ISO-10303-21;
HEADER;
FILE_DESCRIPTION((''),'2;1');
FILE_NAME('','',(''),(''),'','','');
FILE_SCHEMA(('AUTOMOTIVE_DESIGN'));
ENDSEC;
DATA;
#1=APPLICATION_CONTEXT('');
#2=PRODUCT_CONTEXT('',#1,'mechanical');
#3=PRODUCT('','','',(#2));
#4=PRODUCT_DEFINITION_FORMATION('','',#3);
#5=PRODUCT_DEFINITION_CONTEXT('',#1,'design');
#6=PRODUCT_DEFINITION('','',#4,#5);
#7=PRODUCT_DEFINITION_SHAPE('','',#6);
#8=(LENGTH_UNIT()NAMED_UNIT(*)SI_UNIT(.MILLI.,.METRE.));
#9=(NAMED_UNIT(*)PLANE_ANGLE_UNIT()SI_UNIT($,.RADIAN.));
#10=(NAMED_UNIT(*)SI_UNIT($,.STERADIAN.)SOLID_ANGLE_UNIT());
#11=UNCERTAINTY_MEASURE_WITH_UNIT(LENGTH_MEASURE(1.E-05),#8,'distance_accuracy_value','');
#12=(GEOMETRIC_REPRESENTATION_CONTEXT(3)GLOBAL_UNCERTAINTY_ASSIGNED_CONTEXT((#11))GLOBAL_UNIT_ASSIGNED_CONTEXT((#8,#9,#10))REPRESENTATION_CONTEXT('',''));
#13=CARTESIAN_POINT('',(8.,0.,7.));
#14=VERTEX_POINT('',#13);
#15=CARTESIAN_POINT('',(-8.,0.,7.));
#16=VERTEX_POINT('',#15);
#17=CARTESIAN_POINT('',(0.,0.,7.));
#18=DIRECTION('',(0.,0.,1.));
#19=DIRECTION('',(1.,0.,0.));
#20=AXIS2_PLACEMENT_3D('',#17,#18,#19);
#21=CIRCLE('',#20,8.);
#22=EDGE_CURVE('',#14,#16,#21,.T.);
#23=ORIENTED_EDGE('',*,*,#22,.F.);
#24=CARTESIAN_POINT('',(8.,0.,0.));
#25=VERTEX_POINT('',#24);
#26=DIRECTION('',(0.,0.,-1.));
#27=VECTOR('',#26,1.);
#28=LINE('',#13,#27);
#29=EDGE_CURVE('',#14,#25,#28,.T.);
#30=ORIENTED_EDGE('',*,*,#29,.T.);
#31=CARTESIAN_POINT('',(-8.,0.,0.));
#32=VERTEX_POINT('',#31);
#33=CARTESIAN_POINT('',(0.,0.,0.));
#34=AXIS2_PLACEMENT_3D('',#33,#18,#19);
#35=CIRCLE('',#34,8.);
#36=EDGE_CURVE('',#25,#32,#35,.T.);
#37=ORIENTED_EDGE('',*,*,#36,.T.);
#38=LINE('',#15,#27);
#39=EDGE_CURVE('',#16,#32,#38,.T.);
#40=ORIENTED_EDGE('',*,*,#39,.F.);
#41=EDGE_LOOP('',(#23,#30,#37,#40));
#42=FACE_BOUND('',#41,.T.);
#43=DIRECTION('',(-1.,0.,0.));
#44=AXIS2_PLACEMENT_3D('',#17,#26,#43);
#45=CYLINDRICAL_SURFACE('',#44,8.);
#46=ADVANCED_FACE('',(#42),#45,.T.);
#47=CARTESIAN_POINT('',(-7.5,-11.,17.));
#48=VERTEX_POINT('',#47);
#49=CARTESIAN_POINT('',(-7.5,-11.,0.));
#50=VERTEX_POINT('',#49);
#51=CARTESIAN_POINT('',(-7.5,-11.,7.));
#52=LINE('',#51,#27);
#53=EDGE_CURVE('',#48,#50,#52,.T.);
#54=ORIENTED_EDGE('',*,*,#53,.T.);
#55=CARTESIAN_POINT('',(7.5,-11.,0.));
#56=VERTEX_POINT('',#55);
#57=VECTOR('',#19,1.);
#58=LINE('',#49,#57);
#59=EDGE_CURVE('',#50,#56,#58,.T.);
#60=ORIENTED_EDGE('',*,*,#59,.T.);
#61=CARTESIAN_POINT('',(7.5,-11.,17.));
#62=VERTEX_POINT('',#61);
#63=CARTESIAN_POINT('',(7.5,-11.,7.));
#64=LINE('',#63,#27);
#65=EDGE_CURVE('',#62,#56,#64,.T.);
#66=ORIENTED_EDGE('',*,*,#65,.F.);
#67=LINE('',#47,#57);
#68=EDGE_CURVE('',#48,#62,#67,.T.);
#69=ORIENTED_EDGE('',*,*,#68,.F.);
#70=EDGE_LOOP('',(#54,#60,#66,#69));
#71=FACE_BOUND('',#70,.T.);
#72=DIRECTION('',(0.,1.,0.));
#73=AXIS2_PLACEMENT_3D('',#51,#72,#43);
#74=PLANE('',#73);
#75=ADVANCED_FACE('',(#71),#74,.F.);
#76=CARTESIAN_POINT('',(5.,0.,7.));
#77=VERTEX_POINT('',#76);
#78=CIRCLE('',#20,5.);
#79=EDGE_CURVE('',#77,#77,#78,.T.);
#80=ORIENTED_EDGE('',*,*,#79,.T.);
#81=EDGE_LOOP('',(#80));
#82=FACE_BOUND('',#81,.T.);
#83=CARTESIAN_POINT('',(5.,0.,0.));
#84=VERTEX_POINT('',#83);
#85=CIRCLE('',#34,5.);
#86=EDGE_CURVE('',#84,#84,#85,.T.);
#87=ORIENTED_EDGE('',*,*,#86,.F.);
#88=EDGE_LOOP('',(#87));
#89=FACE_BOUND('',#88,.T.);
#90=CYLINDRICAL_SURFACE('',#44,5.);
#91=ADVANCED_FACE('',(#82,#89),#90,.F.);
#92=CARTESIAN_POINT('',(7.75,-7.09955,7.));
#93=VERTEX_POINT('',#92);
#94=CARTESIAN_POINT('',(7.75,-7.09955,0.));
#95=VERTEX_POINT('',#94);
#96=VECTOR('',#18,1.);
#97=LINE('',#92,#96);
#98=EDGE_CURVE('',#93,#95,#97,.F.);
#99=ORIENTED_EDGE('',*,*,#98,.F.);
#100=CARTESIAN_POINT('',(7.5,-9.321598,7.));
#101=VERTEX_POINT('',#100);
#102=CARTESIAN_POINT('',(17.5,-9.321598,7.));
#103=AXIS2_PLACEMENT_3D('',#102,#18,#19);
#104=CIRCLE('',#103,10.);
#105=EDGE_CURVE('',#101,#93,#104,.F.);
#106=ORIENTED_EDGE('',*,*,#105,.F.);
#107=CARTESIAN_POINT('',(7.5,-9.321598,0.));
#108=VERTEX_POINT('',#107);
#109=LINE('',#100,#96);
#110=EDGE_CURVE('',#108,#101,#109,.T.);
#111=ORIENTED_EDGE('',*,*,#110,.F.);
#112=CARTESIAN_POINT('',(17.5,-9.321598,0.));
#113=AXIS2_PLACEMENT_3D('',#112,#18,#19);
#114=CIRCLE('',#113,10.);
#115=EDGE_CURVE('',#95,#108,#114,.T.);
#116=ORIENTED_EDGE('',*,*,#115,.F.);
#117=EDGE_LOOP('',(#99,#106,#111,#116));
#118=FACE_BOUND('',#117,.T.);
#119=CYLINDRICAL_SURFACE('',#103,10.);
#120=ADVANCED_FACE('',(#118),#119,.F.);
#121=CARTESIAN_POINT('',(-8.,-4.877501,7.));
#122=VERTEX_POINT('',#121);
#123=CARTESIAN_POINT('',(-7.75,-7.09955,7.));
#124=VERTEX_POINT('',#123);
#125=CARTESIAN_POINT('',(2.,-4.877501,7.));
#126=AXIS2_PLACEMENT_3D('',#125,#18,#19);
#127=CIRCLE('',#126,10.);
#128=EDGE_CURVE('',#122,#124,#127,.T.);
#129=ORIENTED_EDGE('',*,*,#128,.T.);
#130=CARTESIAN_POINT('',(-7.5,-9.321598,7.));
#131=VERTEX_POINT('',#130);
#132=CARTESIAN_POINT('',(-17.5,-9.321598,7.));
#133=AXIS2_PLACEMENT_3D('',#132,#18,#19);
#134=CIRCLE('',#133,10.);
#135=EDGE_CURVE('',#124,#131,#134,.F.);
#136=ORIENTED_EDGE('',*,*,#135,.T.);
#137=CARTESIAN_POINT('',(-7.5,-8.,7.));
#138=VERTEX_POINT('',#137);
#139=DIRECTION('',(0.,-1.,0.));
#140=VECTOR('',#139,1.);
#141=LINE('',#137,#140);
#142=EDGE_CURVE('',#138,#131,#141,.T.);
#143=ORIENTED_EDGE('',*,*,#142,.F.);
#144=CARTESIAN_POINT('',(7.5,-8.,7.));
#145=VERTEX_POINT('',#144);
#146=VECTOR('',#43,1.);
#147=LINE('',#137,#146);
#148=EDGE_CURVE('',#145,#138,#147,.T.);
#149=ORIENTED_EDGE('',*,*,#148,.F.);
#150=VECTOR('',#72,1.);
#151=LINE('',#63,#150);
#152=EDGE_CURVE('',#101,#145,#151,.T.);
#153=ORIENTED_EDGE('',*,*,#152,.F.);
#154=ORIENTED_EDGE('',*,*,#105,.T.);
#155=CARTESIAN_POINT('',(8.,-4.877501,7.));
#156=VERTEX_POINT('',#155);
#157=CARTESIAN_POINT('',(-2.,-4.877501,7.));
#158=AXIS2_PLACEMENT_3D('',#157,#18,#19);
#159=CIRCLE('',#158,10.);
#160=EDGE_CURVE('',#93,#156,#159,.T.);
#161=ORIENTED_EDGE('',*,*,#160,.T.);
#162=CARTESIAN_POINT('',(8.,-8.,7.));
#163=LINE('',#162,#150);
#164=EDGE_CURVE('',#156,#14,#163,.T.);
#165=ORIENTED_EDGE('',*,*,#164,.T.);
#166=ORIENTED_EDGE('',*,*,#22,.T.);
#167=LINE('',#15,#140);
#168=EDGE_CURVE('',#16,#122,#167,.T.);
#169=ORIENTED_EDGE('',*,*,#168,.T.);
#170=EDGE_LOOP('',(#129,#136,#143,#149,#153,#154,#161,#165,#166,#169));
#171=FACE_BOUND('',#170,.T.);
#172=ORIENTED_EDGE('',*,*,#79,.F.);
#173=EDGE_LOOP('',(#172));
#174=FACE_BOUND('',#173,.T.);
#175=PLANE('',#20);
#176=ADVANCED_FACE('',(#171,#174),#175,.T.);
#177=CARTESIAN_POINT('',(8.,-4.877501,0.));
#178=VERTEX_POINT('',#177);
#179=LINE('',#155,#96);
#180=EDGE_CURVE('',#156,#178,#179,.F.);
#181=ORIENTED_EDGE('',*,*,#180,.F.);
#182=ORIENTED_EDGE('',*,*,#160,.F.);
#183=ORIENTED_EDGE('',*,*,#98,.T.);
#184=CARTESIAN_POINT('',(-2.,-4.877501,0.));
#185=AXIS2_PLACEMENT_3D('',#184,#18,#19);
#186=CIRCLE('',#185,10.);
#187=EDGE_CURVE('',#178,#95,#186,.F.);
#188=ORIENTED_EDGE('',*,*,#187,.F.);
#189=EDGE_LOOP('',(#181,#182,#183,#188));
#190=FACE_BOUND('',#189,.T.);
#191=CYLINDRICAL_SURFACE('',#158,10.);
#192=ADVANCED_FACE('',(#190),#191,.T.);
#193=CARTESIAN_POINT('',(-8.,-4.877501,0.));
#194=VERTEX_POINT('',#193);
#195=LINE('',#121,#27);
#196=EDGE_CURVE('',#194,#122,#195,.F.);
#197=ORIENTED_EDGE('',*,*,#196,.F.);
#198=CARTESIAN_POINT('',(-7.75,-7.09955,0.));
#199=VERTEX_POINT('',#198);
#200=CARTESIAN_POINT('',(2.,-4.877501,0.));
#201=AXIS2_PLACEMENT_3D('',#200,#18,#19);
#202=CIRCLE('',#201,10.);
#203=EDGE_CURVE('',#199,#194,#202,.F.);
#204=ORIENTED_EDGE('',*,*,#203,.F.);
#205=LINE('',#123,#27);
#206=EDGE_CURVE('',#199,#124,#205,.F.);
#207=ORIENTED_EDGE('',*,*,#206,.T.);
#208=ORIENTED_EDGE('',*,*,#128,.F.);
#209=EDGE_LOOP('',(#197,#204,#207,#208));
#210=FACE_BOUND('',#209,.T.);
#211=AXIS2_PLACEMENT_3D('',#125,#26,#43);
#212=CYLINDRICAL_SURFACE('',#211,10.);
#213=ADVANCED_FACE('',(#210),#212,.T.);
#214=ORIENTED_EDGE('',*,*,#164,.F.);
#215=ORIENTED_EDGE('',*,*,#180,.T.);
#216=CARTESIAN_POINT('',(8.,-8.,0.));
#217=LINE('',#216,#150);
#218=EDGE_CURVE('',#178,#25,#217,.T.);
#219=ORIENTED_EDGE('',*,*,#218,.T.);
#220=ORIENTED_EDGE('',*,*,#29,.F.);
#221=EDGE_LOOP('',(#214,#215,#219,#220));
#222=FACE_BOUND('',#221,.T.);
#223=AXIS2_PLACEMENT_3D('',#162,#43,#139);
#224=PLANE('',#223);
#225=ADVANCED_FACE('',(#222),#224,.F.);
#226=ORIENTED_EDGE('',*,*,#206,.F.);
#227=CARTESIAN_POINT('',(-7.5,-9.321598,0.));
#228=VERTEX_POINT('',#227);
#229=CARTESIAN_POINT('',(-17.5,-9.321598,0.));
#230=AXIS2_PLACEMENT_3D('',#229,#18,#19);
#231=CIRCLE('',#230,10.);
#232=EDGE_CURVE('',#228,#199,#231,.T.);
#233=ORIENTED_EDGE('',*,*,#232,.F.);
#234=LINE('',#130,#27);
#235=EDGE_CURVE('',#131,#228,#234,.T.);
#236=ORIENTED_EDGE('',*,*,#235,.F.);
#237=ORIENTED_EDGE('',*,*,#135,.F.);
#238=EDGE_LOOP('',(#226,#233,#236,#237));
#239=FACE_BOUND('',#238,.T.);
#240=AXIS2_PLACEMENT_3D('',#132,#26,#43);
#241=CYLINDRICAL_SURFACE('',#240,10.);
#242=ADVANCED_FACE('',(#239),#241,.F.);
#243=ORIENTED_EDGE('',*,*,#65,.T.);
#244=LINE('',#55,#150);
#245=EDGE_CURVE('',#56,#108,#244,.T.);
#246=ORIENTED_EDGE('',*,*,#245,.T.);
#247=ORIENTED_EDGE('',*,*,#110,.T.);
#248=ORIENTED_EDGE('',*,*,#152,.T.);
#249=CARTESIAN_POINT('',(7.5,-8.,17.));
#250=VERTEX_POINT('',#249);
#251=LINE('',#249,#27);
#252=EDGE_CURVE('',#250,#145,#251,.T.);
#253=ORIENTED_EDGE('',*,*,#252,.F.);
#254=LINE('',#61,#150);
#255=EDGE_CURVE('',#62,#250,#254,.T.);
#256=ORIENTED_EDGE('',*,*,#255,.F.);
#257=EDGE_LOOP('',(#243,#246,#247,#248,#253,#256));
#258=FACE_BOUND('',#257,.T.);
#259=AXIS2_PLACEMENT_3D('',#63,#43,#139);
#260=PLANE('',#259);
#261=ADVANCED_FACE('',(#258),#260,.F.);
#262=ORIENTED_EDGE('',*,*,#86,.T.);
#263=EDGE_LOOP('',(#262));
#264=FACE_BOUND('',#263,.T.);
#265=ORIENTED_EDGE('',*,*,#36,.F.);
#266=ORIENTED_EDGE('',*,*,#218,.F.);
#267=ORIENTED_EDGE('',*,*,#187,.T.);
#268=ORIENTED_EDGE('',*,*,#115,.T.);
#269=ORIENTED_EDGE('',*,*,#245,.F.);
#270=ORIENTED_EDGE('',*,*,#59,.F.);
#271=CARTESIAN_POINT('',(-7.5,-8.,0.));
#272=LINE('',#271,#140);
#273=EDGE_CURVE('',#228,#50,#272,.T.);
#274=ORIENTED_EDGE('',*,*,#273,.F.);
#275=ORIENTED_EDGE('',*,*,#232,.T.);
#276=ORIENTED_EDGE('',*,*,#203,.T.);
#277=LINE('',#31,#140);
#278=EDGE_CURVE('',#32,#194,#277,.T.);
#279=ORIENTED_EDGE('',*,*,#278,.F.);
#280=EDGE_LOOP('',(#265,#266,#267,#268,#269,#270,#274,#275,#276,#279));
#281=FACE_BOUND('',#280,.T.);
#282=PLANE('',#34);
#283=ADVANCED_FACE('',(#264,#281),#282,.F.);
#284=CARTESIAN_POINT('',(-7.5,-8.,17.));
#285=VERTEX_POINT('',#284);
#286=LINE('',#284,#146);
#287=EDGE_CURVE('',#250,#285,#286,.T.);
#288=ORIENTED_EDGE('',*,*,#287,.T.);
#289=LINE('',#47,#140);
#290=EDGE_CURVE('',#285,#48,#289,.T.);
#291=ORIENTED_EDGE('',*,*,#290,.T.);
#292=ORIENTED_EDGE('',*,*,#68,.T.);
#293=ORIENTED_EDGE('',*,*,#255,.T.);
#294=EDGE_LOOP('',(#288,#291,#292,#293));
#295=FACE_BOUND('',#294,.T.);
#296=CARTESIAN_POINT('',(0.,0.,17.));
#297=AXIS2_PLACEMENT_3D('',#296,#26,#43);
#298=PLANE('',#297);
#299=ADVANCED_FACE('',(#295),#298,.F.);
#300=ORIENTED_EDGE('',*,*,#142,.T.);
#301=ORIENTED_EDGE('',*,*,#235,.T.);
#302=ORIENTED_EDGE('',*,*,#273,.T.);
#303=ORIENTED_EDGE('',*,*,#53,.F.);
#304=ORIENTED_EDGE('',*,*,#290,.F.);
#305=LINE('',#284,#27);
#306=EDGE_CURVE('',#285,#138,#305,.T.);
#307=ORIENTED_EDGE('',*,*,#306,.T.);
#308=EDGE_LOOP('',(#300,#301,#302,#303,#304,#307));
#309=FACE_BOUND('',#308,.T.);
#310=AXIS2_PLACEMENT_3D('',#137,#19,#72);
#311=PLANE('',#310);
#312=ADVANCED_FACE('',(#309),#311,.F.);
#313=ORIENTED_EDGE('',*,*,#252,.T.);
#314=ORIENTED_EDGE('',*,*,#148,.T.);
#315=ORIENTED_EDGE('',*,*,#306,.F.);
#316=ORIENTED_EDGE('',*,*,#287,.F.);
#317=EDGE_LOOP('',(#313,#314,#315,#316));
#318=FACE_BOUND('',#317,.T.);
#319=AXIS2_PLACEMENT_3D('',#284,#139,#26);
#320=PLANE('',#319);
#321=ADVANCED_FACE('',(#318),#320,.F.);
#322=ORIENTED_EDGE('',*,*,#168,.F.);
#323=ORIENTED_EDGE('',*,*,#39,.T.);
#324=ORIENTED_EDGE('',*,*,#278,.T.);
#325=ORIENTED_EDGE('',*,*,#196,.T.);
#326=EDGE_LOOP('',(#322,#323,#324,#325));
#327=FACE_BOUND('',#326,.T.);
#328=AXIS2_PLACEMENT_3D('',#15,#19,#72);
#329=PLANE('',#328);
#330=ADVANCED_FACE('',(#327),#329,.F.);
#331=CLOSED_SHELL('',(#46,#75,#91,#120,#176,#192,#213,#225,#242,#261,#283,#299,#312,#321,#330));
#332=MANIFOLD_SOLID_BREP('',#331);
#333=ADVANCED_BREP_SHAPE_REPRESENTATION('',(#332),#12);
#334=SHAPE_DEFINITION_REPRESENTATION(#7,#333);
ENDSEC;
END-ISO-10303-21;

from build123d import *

# Parameters (mm, degrees)
SKETCH1_R           = 5
BOSS_EXTRUDE1_DEPTH = 7
SKETCH2_W           = 15
SKETCH2_H           = 3
BOSS_EXTRUDE2_DEPTH = 10
FILLET1_R           = 10
FILLET2_R           = 10


with BuildPart() as part:
    # Sketch1 → Boss-Extrude1 (new body)
    with BuildSketch(Plane.XY):
        with BuildLine():
            Line((-8, 0), (-8, -8))
            Line((-8, -8), (-7.5, -8))
            Line((-7.5, -8), (-7.5, -11))
            Line((-7.5, -11), (7.5, -11))
            Line((7.5, -11), (7.5, -8))
            Line((7.5, -8), (8, -8))
            Line((8, -8), (8, 0))
            ThreePointArc((8, 0), (0, 8), (-8, 0))
        make_face()
        Circle(SKETCH1_R, mode=Mode.SUBTRACT)
    extrude(amount=BOSS_EXTRUDE1_DEPTH)

    # Sketch2 → Boss-Extrude2 (add)
    with BuildSketch(Plane.XY.offset(7)):
        with Locations((0, -9.5)):
            Rectangle(SKETCH2_W, SKETCH2_H)
    extrude(amount=BOSS_EXTRUDE2_DEPTH)

    # Fillet1
    # the kernel refuses this fillet: 10 mm, written as the material it takes off along each edge
    with BuildSketch(Plane(origin=(-8, -8, -7.806247498), x_dir=(0, 1, 0), z_dir=(0, 0, 1))) as fillet1_piece_1:
        with BuildLine():
            CenterArc((3.122498999, -10), FILLET1_R, 90, 18.194872339)
            Line((0, -0.5), (0, 0))
            Line((0, 0), (3.122498999, 0))
        make_face()
    extrude(amount=22.612494996, mode=Mode.SUBTRACT)
    with BuildSketch(Plane(origin=(8, -8, -7.806247498), x_dir=(-1.0, 2.199129767162818e-12, 0), z_dir=(0, 0, 1))) as fillet1_piece_2:
        with BuildLine():
            CenterArc((10, -3.122498999), FILLET1_R, 161.805127661, 18.194872339)
            Line((0, -3.122498999), (0, 0))
            Line((0, 0), (0.5, 0))
        make_face()
    extrude(amount=22.612494996, mode=Mode.SUBTRACT)

    # Fillet2
    fillet2_edges = [part.edges().sort_by_distance(p)[0] for p in [
        (7.5, -8, 3.5),
        (-7.5, -8, 3.5),
    ]]
    fillet(fillet2_edges, radius=FILLET2_R)


solid = part.part
